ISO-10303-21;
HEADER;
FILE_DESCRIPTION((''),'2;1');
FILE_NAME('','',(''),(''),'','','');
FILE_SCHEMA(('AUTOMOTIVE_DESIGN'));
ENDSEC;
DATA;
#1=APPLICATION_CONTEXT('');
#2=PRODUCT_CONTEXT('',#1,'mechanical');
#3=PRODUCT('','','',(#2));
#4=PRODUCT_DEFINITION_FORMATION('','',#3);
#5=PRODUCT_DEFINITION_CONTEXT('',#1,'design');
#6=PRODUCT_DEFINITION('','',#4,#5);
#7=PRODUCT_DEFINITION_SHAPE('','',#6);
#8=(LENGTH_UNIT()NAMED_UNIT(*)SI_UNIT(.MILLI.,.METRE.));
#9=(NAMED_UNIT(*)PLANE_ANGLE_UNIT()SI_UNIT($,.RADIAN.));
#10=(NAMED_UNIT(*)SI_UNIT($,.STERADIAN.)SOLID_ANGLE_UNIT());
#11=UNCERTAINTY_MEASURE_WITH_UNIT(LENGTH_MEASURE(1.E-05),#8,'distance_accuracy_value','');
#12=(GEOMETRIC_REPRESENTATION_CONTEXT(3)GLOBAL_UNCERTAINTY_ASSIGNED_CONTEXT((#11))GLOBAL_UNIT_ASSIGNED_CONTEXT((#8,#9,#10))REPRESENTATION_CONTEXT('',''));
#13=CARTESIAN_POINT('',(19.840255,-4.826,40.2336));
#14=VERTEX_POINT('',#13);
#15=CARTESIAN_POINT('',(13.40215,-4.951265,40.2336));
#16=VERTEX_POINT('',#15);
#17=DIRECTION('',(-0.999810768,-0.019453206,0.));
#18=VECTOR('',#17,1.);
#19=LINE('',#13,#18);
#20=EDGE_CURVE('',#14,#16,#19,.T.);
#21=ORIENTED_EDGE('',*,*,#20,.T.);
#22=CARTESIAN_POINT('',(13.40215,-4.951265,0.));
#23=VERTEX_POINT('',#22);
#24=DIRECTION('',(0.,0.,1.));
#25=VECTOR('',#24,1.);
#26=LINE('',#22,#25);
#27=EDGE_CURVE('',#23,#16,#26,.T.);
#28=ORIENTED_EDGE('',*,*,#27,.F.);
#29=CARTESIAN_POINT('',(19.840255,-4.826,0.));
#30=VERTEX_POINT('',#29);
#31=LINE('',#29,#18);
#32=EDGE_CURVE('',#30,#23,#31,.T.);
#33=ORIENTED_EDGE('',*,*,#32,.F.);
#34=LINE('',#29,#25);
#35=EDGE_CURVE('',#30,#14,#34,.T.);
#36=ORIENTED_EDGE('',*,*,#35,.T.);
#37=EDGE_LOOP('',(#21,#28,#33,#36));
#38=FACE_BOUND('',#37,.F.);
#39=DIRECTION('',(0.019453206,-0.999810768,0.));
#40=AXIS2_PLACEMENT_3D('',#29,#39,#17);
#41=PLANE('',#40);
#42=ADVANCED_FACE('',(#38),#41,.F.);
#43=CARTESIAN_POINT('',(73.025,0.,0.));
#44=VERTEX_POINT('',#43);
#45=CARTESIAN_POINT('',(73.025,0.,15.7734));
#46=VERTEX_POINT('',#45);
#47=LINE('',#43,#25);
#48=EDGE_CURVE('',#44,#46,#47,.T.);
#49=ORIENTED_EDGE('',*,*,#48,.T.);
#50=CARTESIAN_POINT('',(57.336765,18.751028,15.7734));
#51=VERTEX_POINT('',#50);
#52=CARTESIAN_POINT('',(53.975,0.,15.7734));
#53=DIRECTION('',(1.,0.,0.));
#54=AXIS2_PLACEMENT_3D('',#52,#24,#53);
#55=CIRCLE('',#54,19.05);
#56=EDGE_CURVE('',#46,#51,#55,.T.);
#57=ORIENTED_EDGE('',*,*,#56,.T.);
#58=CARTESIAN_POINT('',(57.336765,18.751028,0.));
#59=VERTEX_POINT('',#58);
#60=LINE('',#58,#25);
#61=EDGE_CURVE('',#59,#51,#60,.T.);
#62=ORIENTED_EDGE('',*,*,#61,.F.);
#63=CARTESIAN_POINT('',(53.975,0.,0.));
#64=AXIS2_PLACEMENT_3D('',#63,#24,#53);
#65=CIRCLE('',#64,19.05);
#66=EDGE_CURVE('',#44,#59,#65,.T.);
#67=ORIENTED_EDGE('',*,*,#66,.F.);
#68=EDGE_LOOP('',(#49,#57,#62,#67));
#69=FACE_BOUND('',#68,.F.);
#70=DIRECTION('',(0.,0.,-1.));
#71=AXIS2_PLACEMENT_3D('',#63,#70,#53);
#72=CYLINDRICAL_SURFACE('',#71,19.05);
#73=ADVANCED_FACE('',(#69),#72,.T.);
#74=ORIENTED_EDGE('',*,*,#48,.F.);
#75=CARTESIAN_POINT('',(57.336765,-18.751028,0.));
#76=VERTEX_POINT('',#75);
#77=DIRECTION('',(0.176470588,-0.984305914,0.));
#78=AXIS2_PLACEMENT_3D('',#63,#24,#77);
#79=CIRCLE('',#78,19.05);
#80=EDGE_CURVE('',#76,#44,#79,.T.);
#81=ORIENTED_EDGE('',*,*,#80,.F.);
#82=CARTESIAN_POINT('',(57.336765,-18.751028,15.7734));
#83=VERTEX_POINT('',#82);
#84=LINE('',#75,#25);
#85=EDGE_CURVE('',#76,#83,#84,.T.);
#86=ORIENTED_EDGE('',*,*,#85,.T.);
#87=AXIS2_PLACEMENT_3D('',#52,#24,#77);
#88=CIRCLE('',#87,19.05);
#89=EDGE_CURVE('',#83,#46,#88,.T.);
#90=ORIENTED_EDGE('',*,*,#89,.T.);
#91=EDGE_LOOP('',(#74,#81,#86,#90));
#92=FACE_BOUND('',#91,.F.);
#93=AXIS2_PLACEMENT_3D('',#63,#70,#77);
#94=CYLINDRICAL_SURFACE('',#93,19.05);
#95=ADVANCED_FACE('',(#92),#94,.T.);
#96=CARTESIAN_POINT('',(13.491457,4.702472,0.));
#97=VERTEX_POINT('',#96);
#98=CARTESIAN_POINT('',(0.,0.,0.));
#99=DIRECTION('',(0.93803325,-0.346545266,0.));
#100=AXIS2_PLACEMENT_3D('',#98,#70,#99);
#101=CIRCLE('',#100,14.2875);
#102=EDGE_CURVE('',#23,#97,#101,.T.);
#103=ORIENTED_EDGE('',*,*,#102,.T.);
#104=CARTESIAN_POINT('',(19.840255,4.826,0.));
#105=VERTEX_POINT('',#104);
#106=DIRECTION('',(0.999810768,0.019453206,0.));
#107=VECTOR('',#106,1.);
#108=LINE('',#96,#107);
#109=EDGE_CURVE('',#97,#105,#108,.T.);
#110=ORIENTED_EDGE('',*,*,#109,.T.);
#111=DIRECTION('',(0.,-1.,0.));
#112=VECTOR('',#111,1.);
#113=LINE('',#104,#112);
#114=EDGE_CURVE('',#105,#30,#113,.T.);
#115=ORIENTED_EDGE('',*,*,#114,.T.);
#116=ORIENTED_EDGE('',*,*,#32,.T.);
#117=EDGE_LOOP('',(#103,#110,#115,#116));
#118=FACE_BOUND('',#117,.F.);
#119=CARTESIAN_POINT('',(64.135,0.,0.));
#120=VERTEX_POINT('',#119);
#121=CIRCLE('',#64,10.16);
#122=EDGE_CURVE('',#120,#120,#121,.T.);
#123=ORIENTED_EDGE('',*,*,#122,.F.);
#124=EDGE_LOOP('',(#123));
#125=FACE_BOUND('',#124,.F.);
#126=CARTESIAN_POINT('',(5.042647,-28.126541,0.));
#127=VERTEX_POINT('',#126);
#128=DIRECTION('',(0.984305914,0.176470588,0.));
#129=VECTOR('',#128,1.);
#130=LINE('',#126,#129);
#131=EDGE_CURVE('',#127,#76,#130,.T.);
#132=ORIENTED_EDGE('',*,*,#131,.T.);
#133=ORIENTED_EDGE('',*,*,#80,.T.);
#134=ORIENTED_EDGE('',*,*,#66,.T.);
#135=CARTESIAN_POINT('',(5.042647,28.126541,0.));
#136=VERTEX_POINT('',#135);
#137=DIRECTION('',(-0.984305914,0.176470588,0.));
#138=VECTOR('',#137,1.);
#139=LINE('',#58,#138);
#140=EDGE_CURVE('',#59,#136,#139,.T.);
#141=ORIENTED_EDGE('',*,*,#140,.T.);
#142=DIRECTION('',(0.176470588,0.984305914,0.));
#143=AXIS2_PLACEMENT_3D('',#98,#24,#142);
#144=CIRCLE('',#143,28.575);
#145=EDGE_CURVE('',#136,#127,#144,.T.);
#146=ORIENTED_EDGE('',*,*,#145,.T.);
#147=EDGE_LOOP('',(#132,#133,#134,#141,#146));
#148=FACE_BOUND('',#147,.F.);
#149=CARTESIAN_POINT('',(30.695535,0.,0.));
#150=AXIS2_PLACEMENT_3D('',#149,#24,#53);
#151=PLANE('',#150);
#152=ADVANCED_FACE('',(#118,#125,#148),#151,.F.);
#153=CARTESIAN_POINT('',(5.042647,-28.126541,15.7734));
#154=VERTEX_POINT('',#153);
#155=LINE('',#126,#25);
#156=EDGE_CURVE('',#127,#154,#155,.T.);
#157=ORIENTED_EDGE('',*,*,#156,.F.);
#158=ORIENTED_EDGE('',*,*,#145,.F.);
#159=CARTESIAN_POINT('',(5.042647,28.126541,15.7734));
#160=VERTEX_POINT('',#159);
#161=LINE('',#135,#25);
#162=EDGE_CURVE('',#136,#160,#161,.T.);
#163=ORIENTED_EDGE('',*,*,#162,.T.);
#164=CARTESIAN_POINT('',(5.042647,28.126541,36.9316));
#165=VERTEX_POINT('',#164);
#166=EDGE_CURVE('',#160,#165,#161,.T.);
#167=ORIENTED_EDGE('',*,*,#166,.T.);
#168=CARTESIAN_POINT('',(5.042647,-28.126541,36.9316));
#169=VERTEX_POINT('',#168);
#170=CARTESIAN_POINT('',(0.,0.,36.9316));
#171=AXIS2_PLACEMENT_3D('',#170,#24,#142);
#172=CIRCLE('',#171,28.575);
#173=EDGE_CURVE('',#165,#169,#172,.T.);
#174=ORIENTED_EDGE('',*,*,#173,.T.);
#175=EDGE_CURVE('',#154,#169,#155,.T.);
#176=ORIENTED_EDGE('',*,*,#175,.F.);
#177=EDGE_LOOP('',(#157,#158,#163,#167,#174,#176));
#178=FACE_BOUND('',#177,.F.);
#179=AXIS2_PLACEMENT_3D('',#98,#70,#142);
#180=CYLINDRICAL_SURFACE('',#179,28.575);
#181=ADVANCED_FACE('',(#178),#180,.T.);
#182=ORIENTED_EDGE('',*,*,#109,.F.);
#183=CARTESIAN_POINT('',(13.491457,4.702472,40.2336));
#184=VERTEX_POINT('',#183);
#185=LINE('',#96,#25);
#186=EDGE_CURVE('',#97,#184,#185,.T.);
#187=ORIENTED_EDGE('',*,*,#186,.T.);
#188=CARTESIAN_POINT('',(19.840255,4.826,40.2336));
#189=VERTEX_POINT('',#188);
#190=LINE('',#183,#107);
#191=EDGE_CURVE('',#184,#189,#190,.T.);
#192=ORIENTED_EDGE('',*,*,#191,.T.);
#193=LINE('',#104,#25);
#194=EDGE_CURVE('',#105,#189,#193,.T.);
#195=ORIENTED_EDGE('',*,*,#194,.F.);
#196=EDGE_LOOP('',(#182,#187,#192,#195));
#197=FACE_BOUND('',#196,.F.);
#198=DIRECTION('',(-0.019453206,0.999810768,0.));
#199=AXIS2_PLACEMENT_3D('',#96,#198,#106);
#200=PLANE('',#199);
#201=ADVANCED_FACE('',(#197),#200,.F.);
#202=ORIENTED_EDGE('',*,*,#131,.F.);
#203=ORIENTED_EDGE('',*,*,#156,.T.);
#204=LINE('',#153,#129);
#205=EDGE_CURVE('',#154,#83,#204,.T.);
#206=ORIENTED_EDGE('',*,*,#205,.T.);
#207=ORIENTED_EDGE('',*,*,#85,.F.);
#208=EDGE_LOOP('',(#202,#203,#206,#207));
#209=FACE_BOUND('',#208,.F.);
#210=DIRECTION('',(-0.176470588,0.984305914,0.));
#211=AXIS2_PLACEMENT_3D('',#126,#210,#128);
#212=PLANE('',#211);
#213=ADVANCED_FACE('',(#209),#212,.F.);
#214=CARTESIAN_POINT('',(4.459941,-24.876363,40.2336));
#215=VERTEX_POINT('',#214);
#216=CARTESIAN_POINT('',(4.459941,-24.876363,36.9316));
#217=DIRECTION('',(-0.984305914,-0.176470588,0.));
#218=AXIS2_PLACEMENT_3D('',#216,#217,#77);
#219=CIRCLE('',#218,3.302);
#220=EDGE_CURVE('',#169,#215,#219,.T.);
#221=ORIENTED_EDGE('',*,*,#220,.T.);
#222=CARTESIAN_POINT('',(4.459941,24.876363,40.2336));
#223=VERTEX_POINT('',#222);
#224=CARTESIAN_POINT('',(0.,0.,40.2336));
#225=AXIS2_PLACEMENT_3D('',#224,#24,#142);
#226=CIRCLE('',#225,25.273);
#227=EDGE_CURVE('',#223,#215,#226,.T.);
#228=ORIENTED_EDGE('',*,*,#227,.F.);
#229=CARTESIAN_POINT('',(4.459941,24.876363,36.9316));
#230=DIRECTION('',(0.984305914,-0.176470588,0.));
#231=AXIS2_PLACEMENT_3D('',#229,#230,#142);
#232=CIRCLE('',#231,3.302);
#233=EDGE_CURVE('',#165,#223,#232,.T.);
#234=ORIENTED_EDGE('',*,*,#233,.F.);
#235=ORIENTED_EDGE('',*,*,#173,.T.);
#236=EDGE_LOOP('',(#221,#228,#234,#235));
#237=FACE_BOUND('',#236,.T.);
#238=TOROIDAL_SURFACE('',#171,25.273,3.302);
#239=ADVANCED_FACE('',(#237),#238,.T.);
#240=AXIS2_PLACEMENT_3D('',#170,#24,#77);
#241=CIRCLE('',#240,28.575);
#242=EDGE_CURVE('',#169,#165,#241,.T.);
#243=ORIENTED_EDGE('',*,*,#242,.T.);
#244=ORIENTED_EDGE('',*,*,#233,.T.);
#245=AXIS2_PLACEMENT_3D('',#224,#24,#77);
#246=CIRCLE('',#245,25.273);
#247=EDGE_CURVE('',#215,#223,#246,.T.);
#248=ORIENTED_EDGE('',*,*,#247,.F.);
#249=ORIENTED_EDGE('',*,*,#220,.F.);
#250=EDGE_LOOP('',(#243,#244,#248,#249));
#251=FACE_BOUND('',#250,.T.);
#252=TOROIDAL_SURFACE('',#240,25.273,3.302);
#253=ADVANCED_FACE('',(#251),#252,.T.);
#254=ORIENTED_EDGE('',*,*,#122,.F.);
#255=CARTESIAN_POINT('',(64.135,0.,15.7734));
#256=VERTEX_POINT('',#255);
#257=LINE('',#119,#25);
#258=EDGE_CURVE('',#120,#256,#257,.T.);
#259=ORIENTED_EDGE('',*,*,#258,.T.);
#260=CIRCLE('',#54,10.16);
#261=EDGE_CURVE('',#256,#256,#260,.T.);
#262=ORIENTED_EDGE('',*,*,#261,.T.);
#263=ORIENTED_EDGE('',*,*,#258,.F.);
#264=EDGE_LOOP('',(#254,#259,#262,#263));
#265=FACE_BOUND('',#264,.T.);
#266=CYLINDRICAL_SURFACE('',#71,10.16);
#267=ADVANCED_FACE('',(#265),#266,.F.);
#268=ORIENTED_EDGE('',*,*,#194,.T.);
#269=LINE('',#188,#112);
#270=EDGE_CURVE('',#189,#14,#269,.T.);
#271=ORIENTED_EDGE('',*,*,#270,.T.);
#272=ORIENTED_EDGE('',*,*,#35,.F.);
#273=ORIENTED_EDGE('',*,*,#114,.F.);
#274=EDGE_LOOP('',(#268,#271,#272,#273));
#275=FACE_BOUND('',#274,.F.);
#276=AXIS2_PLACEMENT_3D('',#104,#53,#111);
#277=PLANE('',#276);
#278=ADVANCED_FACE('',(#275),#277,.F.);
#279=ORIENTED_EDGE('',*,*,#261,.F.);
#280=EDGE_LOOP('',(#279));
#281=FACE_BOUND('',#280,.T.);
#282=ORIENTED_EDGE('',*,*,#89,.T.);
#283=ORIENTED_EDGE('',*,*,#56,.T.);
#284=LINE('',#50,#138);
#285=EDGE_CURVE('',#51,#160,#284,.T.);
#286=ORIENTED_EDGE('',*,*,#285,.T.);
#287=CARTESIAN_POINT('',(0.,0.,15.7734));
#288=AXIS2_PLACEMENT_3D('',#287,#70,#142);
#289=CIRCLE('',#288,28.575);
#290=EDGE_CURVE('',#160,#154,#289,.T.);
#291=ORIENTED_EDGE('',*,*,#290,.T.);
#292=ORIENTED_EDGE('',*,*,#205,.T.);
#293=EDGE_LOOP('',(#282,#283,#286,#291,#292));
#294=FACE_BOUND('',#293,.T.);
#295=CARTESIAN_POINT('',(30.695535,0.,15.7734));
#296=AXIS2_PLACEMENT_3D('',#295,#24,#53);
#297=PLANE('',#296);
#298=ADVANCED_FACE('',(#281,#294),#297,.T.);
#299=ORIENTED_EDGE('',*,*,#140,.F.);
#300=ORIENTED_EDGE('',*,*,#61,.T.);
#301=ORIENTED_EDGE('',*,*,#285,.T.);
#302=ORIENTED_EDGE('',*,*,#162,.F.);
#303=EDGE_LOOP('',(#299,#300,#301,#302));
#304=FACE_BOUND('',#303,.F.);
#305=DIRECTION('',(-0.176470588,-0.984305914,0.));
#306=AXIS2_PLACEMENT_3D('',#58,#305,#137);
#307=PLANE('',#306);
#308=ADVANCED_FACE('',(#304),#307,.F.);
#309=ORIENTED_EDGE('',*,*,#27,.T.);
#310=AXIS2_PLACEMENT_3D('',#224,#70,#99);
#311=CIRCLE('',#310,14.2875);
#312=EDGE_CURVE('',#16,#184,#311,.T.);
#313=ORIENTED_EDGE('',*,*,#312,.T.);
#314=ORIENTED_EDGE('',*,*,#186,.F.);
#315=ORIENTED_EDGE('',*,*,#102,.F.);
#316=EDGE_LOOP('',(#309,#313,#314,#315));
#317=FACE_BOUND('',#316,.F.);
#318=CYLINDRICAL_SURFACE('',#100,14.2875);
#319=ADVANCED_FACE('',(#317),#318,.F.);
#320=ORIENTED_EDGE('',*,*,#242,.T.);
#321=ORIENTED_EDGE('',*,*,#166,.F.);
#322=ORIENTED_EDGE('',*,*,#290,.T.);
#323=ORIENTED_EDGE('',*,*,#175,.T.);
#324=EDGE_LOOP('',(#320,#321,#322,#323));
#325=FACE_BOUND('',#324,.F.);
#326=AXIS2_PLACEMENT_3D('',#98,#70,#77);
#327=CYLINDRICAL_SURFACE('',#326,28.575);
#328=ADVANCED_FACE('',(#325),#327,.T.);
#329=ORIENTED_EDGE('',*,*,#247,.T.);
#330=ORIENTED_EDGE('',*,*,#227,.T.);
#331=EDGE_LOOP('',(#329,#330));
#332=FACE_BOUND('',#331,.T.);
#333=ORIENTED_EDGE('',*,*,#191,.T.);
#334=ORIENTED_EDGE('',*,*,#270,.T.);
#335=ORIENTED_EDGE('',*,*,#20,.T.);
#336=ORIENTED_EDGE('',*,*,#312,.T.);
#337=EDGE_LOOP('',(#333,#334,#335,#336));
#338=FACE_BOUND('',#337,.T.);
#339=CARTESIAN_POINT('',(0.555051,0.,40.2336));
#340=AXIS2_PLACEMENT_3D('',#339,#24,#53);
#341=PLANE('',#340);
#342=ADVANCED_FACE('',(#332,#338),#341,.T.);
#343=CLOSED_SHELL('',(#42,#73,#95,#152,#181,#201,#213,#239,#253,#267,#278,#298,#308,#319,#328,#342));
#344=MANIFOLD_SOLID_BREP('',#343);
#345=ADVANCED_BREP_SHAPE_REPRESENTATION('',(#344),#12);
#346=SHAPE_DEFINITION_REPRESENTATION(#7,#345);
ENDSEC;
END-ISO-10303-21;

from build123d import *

# Parameters (mm, degrees)
F1_DEPTH = 40.2336
F0_R     = 10.16
F2_DEPTH = 15.7734
F3_R     = 3.302


# Not quite as in the source:
# - a feature names something its author has since deleted; it is built from what else it names


with BuildPart() as f1:
    # F0 (on Top) → F1 (new body)
    with BuildSketch(Plane.XY):
        with BuildLine():
            ThreePointArc((5.0426470588, -28.1265414802), (21.9160245563, -18.3362616868), (28.575, 0))
            ThreePointArc((28.575, 0), (21.9160245563, 18.3362616868), (5.0426470588, 28.1265414802))
            ThreePointArc((5.0426470588, 28.1265414802), (-28.575, 0), (5.0426470588, -28.1265414802))
        make_face()
        with BuildLine():
            ThreePointArc((13.4021500625, -4.9512654901), (-14.2868886671, 0.1321683185), (13.4914569997, 4.702472145))
            Line((13.4914569997, 4.702472145), (19.8402553797, 4.826))
            Line((19.8402553797, 4.826), (19.8402553797, -4.826))
            Line((19.8402553797, -4.826), (13.4021500625, -4.9512654901))
        make_face(mode=Mode.SUBTRACT)
    extrude(amount=F1_DEPTH)

    # F0 (on Top) → F2 (join)
    with BuildSketch(Plane.XY):
        with BuildLine():
            ThreePointArc((5.0426470588, 28.1265414802), (21.9160245563, 18.3362616868), (28.575, 0))
            ThreePointArc((28.575, 0), (21.9160245563, -18.3362616868), (5.0426470588, -28.1265414802))
            Line((5.0426470588, -28.1265414802), (57.3367647059, -18.7510276535))
            ThreePointArc((57.3367647059, -18.7510276535), (34.925, 0), (57.3367647059, 18.7510276535))
            Line((57.3367647059, 18.7510276535), (5.0426470588, 28.1265414802))
        make_face()
        with BuildLine():
            ThreePointArc((73.025, 0), (68.5856830375, 12.2241744579), (57.3367647059, 18.7510276535))
            ThreePointArc((57.3367647059, 18.7510276535), (34.925, 0), (57.3367647059, -18.7510276535))
            ThreePointArc((57.3367647059, -18.7510276535), (68.5856830375, -12.2241744579), (73.025, 0))
        make_face()
        with Locations((53.975, 0)):
            Circle(F0_R, mode=Mode.SUBTRACT)
    extrude(amount=F2_DEPTH)

    # F3
    f3_edges = [f1.edges().sort_by_distance(p)[0] for p in [
        (-5.042647, 28.126541, 40.2336),
    ]]
    fillet(f3_edges, radius=F3_R)


solid = f1.part
